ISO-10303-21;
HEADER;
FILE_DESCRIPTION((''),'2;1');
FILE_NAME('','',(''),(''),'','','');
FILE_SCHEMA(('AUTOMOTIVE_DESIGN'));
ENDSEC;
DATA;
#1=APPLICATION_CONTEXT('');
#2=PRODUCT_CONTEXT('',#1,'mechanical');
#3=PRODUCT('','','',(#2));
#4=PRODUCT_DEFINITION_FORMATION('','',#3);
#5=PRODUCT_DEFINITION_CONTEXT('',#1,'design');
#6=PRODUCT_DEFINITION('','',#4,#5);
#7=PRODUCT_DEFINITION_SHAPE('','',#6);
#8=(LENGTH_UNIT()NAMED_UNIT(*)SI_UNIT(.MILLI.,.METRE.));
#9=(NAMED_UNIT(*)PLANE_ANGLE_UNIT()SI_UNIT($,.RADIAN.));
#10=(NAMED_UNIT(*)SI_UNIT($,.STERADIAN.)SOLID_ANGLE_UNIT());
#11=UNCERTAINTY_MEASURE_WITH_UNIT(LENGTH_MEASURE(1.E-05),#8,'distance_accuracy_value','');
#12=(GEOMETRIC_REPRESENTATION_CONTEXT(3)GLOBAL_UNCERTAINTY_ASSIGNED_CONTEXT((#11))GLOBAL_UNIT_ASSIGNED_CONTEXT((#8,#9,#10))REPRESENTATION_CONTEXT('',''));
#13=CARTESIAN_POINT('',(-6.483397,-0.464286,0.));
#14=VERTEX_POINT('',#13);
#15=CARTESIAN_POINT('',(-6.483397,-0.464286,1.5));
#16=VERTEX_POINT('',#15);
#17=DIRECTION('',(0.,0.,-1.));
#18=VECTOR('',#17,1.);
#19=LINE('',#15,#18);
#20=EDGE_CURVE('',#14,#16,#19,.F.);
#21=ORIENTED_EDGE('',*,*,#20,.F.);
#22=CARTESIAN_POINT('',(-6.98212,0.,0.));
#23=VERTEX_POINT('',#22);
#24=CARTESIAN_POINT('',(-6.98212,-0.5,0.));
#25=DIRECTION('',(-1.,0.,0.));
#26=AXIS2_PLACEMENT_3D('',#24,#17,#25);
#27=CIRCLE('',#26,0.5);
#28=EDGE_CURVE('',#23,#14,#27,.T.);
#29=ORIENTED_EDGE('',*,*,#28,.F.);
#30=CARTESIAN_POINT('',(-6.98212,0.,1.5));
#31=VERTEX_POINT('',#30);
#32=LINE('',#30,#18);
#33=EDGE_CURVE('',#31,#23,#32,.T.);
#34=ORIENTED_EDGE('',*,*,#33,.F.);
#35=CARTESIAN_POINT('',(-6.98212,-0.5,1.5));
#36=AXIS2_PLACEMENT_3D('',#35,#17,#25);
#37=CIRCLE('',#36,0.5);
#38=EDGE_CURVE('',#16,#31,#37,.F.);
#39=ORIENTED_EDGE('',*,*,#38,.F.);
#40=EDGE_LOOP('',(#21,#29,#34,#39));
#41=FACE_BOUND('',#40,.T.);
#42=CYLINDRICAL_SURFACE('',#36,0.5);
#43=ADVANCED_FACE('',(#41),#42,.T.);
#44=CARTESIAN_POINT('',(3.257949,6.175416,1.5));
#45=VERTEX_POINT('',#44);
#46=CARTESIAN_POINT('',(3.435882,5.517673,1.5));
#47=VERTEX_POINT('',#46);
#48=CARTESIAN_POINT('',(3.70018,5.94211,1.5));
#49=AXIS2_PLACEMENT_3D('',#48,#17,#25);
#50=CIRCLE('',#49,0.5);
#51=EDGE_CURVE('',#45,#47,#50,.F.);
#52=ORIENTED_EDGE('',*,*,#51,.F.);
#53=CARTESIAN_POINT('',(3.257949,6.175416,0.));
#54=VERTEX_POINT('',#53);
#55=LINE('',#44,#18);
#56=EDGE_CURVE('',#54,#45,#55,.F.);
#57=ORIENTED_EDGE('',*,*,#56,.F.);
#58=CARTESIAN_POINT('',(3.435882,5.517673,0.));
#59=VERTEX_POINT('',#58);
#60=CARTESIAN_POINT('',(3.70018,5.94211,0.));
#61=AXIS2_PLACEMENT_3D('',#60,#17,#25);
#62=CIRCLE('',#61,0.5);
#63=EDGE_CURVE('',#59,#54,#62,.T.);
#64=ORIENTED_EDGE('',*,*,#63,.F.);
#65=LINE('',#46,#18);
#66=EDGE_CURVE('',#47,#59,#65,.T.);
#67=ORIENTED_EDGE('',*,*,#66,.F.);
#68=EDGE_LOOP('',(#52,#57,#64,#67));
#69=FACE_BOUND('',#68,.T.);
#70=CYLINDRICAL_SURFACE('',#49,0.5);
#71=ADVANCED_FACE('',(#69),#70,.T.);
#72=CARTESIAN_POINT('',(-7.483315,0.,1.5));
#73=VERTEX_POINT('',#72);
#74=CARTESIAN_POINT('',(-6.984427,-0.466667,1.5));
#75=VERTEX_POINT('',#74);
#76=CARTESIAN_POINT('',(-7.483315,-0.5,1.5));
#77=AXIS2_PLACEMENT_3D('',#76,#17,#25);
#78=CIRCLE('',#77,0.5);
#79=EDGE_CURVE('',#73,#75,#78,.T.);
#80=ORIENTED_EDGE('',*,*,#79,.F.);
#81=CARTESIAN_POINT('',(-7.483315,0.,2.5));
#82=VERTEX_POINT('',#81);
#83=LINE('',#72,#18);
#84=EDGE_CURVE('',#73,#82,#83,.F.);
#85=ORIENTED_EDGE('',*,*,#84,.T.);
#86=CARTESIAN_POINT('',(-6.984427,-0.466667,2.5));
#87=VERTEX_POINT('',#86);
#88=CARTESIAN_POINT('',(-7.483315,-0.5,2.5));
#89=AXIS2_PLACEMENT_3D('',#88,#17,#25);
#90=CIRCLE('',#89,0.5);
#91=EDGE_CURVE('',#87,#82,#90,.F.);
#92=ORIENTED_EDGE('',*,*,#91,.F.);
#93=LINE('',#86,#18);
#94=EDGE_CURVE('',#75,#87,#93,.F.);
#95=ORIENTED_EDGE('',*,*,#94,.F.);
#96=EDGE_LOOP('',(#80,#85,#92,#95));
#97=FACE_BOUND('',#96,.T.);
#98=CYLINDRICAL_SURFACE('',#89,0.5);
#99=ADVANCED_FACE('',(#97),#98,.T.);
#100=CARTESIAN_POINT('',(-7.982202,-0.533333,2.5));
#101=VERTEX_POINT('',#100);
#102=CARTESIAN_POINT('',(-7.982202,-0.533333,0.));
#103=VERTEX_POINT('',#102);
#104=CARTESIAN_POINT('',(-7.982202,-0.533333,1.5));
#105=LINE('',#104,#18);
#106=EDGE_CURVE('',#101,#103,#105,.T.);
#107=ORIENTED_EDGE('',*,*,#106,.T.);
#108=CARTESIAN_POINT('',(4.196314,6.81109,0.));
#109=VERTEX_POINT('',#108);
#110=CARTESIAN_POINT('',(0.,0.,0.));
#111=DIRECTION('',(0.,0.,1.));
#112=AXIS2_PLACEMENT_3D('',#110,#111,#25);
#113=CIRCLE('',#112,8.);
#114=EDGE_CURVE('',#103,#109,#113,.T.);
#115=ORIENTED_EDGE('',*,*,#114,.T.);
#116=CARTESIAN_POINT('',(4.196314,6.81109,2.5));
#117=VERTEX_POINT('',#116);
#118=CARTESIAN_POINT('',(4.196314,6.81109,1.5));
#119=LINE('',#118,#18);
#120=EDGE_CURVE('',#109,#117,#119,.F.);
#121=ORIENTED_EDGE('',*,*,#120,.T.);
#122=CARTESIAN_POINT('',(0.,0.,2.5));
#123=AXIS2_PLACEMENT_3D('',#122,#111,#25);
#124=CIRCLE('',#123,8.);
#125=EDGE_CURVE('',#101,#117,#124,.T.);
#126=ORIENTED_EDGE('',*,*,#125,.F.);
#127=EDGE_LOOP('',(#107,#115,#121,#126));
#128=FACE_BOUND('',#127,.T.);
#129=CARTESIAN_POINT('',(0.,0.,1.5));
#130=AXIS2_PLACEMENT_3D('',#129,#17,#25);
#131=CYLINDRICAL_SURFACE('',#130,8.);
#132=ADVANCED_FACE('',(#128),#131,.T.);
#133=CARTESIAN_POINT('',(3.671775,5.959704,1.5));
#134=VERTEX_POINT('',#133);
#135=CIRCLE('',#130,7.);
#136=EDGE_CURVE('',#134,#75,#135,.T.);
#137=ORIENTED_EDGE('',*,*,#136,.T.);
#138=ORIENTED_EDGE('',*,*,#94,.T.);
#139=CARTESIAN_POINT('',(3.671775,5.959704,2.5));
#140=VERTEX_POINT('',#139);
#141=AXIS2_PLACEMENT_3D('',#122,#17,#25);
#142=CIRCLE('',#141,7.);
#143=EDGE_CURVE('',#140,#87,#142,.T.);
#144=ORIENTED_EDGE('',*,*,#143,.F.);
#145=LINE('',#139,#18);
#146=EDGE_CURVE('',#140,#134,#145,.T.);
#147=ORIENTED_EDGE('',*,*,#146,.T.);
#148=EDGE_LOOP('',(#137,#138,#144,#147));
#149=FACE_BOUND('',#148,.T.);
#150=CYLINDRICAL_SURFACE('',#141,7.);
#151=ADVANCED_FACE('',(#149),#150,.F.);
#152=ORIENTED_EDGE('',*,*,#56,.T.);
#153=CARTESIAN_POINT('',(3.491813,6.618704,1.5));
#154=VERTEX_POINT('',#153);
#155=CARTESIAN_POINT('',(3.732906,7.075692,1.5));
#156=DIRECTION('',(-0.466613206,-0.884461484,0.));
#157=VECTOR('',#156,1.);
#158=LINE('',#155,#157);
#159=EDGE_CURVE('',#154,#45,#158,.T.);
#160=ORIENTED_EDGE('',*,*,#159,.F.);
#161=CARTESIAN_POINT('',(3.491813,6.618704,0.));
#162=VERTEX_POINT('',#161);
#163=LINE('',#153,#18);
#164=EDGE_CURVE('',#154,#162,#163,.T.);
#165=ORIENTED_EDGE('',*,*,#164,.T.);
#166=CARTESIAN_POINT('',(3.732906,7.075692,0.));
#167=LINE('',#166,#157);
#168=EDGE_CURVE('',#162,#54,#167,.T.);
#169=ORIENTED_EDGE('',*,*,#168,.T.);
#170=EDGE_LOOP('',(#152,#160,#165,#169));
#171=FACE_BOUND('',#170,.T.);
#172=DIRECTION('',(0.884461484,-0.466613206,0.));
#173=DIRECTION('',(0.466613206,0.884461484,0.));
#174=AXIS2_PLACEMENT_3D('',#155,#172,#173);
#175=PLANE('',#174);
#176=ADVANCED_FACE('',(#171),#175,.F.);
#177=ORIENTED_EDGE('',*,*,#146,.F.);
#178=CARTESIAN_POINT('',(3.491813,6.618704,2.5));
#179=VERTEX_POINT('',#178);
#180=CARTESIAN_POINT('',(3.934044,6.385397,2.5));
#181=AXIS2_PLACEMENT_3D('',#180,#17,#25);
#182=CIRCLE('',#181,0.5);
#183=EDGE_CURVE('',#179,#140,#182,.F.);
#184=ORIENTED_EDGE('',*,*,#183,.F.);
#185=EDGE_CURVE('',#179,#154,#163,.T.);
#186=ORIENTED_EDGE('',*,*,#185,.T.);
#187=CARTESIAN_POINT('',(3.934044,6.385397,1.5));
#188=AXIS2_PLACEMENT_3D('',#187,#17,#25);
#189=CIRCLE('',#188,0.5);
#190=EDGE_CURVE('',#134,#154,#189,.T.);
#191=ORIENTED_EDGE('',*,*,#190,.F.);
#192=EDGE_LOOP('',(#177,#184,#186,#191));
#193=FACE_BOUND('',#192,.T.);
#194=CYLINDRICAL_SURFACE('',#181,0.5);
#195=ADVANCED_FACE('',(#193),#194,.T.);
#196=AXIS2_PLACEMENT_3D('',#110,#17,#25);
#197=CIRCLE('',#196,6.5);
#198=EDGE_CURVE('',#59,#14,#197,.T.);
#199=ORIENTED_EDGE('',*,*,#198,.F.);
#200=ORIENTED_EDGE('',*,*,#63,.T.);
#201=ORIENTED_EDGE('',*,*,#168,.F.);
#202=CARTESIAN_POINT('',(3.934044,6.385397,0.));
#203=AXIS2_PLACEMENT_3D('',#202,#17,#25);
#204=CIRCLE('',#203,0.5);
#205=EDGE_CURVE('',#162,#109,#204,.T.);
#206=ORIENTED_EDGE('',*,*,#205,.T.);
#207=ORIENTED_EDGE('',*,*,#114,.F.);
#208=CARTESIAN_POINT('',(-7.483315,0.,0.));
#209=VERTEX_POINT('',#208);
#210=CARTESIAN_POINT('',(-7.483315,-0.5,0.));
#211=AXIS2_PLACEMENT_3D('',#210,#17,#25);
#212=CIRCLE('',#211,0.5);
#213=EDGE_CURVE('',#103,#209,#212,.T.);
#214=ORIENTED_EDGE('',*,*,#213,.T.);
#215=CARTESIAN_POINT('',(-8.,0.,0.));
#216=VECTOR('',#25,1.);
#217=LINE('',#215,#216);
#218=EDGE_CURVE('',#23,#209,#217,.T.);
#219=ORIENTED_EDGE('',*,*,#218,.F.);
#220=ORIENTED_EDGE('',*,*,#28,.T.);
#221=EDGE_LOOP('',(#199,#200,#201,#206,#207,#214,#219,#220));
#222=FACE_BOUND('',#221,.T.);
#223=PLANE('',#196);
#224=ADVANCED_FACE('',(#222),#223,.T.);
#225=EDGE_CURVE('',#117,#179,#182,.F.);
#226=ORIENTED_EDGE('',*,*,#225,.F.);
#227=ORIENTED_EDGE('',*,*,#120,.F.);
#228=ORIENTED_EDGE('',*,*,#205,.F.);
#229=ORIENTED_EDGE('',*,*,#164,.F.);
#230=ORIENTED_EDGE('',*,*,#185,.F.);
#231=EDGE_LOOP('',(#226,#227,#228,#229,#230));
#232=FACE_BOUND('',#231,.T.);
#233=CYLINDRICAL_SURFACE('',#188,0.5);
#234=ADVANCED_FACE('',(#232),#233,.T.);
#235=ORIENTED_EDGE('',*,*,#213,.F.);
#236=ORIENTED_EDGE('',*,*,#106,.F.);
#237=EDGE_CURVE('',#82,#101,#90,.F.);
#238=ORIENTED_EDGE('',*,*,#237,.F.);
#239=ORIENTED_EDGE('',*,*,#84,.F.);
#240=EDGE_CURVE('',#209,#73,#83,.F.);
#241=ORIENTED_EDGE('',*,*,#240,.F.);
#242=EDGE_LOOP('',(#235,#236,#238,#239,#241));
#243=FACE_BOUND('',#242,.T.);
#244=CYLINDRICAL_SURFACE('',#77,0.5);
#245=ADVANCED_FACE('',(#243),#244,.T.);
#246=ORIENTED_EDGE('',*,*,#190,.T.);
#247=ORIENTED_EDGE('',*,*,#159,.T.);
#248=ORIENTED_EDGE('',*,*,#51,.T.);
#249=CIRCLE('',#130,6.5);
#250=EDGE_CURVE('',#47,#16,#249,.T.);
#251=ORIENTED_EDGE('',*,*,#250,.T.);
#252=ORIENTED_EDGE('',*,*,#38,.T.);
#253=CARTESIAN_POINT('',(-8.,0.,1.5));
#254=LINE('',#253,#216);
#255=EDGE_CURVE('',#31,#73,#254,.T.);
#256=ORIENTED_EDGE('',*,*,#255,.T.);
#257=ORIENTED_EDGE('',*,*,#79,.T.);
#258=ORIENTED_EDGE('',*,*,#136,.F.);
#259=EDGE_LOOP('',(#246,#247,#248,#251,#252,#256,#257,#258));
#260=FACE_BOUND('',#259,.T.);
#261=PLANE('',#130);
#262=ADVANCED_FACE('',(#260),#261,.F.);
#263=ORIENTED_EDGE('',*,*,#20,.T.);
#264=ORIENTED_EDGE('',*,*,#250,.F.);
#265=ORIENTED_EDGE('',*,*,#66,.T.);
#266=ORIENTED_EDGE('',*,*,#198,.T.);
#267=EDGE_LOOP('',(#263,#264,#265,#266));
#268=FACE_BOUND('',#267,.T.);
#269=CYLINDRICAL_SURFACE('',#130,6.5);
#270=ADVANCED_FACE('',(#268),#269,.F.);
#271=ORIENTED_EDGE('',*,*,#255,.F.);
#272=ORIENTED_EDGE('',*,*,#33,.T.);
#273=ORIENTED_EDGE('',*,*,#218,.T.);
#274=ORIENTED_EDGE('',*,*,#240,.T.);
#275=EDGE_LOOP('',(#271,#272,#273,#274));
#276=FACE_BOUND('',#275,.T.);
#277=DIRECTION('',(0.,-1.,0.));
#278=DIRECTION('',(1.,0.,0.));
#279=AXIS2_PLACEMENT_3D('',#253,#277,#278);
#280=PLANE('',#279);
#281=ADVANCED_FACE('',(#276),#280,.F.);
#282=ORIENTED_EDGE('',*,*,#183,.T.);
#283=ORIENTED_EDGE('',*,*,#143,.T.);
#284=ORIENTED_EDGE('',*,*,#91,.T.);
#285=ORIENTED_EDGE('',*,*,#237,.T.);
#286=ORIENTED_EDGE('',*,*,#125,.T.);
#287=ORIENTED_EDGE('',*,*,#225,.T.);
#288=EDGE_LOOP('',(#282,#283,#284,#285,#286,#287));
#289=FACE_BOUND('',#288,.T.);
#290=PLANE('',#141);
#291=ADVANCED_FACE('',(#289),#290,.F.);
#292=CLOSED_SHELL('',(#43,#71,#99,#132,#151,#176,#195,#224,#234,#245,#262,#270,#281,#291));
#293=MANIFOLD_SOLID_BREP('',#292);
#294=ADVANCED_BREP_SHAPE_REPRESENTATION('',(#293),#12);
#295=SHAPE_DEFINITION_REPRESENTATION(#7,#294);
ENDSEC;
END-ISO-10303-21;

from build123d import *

# Parameters (mm, degrees)
BOSS_EXTRUDE1_DEPTH = 1.5
BOSS_EXTRUDE2_DEPTH = 1
FILLET1_R           = 0.5


with BuildPart() as part:
    # Sketch1 → Boss-Extrude1 (new body)
    with BuildSketch(Plane.XY):
        with BuildLine():
            Line((3.7329056464785526, 7.075691869668192), (3.032985837763823, 5.748999644105406))
            ThreePointArc((3.032985837763823, 5.748999644105406), (3.3567537930666855, -5.566166002980186), (-6.5, 0))
            Line((-6.5, 0), (-8, 9.8e-16))
            ThreePointArc((-8, 9.8e-16), (4.13138928377438, -6.850665849821768), (3.7329056464785526, 7.075691869668192))
        make_face()
    extrude(amount=BOSS_EXTRUDE1_DEPTH)

    # Sketch2 → Boss-Extrude2 (add)
    with BuildSketch(Plane.XY.offset(1.5)):
        with BuildLine():
            Line((3.7329056464785526, 7.075691869668192), (3.266292440668733, 6.191230385959669))
            ThreePointArc((3.266292440668733, 6.191230385959669), (3.6149656233025835, -5.994332618594048), (-7, 0))
            Line((-7, 0), (-8, 9.8e-16))
            ThreePointArc((-8, 9.8e-16), (4.13138928377438, -6.850665849821768), (3.7329056464785526, 7.075691869668192))
        make_face()
    extrude(amount=BOSS_EXTRUDE2_DEPTH)

    # Fillet1
    fillet1_edges = [part.edges().sort_by_distance(p)[0] for p in [
        (-6.5, -2.96e-15, 0.75),
        (-7, -3.17e-15, 2),
        (-8, 9.8e-16, 1.25),
        (3.2662924406687326, 6.191230385959669, 2),
        (3.032985837763823, 5.748999644105407, 0.75),
        (3.7329056464785557, 7.075691869668191, 1.25),
    ]]
    fillet(fillet1_edges, radius=FILLET1_R - 0.0001)  # a hair under: the kernel refuses the full size


solid = part.part
